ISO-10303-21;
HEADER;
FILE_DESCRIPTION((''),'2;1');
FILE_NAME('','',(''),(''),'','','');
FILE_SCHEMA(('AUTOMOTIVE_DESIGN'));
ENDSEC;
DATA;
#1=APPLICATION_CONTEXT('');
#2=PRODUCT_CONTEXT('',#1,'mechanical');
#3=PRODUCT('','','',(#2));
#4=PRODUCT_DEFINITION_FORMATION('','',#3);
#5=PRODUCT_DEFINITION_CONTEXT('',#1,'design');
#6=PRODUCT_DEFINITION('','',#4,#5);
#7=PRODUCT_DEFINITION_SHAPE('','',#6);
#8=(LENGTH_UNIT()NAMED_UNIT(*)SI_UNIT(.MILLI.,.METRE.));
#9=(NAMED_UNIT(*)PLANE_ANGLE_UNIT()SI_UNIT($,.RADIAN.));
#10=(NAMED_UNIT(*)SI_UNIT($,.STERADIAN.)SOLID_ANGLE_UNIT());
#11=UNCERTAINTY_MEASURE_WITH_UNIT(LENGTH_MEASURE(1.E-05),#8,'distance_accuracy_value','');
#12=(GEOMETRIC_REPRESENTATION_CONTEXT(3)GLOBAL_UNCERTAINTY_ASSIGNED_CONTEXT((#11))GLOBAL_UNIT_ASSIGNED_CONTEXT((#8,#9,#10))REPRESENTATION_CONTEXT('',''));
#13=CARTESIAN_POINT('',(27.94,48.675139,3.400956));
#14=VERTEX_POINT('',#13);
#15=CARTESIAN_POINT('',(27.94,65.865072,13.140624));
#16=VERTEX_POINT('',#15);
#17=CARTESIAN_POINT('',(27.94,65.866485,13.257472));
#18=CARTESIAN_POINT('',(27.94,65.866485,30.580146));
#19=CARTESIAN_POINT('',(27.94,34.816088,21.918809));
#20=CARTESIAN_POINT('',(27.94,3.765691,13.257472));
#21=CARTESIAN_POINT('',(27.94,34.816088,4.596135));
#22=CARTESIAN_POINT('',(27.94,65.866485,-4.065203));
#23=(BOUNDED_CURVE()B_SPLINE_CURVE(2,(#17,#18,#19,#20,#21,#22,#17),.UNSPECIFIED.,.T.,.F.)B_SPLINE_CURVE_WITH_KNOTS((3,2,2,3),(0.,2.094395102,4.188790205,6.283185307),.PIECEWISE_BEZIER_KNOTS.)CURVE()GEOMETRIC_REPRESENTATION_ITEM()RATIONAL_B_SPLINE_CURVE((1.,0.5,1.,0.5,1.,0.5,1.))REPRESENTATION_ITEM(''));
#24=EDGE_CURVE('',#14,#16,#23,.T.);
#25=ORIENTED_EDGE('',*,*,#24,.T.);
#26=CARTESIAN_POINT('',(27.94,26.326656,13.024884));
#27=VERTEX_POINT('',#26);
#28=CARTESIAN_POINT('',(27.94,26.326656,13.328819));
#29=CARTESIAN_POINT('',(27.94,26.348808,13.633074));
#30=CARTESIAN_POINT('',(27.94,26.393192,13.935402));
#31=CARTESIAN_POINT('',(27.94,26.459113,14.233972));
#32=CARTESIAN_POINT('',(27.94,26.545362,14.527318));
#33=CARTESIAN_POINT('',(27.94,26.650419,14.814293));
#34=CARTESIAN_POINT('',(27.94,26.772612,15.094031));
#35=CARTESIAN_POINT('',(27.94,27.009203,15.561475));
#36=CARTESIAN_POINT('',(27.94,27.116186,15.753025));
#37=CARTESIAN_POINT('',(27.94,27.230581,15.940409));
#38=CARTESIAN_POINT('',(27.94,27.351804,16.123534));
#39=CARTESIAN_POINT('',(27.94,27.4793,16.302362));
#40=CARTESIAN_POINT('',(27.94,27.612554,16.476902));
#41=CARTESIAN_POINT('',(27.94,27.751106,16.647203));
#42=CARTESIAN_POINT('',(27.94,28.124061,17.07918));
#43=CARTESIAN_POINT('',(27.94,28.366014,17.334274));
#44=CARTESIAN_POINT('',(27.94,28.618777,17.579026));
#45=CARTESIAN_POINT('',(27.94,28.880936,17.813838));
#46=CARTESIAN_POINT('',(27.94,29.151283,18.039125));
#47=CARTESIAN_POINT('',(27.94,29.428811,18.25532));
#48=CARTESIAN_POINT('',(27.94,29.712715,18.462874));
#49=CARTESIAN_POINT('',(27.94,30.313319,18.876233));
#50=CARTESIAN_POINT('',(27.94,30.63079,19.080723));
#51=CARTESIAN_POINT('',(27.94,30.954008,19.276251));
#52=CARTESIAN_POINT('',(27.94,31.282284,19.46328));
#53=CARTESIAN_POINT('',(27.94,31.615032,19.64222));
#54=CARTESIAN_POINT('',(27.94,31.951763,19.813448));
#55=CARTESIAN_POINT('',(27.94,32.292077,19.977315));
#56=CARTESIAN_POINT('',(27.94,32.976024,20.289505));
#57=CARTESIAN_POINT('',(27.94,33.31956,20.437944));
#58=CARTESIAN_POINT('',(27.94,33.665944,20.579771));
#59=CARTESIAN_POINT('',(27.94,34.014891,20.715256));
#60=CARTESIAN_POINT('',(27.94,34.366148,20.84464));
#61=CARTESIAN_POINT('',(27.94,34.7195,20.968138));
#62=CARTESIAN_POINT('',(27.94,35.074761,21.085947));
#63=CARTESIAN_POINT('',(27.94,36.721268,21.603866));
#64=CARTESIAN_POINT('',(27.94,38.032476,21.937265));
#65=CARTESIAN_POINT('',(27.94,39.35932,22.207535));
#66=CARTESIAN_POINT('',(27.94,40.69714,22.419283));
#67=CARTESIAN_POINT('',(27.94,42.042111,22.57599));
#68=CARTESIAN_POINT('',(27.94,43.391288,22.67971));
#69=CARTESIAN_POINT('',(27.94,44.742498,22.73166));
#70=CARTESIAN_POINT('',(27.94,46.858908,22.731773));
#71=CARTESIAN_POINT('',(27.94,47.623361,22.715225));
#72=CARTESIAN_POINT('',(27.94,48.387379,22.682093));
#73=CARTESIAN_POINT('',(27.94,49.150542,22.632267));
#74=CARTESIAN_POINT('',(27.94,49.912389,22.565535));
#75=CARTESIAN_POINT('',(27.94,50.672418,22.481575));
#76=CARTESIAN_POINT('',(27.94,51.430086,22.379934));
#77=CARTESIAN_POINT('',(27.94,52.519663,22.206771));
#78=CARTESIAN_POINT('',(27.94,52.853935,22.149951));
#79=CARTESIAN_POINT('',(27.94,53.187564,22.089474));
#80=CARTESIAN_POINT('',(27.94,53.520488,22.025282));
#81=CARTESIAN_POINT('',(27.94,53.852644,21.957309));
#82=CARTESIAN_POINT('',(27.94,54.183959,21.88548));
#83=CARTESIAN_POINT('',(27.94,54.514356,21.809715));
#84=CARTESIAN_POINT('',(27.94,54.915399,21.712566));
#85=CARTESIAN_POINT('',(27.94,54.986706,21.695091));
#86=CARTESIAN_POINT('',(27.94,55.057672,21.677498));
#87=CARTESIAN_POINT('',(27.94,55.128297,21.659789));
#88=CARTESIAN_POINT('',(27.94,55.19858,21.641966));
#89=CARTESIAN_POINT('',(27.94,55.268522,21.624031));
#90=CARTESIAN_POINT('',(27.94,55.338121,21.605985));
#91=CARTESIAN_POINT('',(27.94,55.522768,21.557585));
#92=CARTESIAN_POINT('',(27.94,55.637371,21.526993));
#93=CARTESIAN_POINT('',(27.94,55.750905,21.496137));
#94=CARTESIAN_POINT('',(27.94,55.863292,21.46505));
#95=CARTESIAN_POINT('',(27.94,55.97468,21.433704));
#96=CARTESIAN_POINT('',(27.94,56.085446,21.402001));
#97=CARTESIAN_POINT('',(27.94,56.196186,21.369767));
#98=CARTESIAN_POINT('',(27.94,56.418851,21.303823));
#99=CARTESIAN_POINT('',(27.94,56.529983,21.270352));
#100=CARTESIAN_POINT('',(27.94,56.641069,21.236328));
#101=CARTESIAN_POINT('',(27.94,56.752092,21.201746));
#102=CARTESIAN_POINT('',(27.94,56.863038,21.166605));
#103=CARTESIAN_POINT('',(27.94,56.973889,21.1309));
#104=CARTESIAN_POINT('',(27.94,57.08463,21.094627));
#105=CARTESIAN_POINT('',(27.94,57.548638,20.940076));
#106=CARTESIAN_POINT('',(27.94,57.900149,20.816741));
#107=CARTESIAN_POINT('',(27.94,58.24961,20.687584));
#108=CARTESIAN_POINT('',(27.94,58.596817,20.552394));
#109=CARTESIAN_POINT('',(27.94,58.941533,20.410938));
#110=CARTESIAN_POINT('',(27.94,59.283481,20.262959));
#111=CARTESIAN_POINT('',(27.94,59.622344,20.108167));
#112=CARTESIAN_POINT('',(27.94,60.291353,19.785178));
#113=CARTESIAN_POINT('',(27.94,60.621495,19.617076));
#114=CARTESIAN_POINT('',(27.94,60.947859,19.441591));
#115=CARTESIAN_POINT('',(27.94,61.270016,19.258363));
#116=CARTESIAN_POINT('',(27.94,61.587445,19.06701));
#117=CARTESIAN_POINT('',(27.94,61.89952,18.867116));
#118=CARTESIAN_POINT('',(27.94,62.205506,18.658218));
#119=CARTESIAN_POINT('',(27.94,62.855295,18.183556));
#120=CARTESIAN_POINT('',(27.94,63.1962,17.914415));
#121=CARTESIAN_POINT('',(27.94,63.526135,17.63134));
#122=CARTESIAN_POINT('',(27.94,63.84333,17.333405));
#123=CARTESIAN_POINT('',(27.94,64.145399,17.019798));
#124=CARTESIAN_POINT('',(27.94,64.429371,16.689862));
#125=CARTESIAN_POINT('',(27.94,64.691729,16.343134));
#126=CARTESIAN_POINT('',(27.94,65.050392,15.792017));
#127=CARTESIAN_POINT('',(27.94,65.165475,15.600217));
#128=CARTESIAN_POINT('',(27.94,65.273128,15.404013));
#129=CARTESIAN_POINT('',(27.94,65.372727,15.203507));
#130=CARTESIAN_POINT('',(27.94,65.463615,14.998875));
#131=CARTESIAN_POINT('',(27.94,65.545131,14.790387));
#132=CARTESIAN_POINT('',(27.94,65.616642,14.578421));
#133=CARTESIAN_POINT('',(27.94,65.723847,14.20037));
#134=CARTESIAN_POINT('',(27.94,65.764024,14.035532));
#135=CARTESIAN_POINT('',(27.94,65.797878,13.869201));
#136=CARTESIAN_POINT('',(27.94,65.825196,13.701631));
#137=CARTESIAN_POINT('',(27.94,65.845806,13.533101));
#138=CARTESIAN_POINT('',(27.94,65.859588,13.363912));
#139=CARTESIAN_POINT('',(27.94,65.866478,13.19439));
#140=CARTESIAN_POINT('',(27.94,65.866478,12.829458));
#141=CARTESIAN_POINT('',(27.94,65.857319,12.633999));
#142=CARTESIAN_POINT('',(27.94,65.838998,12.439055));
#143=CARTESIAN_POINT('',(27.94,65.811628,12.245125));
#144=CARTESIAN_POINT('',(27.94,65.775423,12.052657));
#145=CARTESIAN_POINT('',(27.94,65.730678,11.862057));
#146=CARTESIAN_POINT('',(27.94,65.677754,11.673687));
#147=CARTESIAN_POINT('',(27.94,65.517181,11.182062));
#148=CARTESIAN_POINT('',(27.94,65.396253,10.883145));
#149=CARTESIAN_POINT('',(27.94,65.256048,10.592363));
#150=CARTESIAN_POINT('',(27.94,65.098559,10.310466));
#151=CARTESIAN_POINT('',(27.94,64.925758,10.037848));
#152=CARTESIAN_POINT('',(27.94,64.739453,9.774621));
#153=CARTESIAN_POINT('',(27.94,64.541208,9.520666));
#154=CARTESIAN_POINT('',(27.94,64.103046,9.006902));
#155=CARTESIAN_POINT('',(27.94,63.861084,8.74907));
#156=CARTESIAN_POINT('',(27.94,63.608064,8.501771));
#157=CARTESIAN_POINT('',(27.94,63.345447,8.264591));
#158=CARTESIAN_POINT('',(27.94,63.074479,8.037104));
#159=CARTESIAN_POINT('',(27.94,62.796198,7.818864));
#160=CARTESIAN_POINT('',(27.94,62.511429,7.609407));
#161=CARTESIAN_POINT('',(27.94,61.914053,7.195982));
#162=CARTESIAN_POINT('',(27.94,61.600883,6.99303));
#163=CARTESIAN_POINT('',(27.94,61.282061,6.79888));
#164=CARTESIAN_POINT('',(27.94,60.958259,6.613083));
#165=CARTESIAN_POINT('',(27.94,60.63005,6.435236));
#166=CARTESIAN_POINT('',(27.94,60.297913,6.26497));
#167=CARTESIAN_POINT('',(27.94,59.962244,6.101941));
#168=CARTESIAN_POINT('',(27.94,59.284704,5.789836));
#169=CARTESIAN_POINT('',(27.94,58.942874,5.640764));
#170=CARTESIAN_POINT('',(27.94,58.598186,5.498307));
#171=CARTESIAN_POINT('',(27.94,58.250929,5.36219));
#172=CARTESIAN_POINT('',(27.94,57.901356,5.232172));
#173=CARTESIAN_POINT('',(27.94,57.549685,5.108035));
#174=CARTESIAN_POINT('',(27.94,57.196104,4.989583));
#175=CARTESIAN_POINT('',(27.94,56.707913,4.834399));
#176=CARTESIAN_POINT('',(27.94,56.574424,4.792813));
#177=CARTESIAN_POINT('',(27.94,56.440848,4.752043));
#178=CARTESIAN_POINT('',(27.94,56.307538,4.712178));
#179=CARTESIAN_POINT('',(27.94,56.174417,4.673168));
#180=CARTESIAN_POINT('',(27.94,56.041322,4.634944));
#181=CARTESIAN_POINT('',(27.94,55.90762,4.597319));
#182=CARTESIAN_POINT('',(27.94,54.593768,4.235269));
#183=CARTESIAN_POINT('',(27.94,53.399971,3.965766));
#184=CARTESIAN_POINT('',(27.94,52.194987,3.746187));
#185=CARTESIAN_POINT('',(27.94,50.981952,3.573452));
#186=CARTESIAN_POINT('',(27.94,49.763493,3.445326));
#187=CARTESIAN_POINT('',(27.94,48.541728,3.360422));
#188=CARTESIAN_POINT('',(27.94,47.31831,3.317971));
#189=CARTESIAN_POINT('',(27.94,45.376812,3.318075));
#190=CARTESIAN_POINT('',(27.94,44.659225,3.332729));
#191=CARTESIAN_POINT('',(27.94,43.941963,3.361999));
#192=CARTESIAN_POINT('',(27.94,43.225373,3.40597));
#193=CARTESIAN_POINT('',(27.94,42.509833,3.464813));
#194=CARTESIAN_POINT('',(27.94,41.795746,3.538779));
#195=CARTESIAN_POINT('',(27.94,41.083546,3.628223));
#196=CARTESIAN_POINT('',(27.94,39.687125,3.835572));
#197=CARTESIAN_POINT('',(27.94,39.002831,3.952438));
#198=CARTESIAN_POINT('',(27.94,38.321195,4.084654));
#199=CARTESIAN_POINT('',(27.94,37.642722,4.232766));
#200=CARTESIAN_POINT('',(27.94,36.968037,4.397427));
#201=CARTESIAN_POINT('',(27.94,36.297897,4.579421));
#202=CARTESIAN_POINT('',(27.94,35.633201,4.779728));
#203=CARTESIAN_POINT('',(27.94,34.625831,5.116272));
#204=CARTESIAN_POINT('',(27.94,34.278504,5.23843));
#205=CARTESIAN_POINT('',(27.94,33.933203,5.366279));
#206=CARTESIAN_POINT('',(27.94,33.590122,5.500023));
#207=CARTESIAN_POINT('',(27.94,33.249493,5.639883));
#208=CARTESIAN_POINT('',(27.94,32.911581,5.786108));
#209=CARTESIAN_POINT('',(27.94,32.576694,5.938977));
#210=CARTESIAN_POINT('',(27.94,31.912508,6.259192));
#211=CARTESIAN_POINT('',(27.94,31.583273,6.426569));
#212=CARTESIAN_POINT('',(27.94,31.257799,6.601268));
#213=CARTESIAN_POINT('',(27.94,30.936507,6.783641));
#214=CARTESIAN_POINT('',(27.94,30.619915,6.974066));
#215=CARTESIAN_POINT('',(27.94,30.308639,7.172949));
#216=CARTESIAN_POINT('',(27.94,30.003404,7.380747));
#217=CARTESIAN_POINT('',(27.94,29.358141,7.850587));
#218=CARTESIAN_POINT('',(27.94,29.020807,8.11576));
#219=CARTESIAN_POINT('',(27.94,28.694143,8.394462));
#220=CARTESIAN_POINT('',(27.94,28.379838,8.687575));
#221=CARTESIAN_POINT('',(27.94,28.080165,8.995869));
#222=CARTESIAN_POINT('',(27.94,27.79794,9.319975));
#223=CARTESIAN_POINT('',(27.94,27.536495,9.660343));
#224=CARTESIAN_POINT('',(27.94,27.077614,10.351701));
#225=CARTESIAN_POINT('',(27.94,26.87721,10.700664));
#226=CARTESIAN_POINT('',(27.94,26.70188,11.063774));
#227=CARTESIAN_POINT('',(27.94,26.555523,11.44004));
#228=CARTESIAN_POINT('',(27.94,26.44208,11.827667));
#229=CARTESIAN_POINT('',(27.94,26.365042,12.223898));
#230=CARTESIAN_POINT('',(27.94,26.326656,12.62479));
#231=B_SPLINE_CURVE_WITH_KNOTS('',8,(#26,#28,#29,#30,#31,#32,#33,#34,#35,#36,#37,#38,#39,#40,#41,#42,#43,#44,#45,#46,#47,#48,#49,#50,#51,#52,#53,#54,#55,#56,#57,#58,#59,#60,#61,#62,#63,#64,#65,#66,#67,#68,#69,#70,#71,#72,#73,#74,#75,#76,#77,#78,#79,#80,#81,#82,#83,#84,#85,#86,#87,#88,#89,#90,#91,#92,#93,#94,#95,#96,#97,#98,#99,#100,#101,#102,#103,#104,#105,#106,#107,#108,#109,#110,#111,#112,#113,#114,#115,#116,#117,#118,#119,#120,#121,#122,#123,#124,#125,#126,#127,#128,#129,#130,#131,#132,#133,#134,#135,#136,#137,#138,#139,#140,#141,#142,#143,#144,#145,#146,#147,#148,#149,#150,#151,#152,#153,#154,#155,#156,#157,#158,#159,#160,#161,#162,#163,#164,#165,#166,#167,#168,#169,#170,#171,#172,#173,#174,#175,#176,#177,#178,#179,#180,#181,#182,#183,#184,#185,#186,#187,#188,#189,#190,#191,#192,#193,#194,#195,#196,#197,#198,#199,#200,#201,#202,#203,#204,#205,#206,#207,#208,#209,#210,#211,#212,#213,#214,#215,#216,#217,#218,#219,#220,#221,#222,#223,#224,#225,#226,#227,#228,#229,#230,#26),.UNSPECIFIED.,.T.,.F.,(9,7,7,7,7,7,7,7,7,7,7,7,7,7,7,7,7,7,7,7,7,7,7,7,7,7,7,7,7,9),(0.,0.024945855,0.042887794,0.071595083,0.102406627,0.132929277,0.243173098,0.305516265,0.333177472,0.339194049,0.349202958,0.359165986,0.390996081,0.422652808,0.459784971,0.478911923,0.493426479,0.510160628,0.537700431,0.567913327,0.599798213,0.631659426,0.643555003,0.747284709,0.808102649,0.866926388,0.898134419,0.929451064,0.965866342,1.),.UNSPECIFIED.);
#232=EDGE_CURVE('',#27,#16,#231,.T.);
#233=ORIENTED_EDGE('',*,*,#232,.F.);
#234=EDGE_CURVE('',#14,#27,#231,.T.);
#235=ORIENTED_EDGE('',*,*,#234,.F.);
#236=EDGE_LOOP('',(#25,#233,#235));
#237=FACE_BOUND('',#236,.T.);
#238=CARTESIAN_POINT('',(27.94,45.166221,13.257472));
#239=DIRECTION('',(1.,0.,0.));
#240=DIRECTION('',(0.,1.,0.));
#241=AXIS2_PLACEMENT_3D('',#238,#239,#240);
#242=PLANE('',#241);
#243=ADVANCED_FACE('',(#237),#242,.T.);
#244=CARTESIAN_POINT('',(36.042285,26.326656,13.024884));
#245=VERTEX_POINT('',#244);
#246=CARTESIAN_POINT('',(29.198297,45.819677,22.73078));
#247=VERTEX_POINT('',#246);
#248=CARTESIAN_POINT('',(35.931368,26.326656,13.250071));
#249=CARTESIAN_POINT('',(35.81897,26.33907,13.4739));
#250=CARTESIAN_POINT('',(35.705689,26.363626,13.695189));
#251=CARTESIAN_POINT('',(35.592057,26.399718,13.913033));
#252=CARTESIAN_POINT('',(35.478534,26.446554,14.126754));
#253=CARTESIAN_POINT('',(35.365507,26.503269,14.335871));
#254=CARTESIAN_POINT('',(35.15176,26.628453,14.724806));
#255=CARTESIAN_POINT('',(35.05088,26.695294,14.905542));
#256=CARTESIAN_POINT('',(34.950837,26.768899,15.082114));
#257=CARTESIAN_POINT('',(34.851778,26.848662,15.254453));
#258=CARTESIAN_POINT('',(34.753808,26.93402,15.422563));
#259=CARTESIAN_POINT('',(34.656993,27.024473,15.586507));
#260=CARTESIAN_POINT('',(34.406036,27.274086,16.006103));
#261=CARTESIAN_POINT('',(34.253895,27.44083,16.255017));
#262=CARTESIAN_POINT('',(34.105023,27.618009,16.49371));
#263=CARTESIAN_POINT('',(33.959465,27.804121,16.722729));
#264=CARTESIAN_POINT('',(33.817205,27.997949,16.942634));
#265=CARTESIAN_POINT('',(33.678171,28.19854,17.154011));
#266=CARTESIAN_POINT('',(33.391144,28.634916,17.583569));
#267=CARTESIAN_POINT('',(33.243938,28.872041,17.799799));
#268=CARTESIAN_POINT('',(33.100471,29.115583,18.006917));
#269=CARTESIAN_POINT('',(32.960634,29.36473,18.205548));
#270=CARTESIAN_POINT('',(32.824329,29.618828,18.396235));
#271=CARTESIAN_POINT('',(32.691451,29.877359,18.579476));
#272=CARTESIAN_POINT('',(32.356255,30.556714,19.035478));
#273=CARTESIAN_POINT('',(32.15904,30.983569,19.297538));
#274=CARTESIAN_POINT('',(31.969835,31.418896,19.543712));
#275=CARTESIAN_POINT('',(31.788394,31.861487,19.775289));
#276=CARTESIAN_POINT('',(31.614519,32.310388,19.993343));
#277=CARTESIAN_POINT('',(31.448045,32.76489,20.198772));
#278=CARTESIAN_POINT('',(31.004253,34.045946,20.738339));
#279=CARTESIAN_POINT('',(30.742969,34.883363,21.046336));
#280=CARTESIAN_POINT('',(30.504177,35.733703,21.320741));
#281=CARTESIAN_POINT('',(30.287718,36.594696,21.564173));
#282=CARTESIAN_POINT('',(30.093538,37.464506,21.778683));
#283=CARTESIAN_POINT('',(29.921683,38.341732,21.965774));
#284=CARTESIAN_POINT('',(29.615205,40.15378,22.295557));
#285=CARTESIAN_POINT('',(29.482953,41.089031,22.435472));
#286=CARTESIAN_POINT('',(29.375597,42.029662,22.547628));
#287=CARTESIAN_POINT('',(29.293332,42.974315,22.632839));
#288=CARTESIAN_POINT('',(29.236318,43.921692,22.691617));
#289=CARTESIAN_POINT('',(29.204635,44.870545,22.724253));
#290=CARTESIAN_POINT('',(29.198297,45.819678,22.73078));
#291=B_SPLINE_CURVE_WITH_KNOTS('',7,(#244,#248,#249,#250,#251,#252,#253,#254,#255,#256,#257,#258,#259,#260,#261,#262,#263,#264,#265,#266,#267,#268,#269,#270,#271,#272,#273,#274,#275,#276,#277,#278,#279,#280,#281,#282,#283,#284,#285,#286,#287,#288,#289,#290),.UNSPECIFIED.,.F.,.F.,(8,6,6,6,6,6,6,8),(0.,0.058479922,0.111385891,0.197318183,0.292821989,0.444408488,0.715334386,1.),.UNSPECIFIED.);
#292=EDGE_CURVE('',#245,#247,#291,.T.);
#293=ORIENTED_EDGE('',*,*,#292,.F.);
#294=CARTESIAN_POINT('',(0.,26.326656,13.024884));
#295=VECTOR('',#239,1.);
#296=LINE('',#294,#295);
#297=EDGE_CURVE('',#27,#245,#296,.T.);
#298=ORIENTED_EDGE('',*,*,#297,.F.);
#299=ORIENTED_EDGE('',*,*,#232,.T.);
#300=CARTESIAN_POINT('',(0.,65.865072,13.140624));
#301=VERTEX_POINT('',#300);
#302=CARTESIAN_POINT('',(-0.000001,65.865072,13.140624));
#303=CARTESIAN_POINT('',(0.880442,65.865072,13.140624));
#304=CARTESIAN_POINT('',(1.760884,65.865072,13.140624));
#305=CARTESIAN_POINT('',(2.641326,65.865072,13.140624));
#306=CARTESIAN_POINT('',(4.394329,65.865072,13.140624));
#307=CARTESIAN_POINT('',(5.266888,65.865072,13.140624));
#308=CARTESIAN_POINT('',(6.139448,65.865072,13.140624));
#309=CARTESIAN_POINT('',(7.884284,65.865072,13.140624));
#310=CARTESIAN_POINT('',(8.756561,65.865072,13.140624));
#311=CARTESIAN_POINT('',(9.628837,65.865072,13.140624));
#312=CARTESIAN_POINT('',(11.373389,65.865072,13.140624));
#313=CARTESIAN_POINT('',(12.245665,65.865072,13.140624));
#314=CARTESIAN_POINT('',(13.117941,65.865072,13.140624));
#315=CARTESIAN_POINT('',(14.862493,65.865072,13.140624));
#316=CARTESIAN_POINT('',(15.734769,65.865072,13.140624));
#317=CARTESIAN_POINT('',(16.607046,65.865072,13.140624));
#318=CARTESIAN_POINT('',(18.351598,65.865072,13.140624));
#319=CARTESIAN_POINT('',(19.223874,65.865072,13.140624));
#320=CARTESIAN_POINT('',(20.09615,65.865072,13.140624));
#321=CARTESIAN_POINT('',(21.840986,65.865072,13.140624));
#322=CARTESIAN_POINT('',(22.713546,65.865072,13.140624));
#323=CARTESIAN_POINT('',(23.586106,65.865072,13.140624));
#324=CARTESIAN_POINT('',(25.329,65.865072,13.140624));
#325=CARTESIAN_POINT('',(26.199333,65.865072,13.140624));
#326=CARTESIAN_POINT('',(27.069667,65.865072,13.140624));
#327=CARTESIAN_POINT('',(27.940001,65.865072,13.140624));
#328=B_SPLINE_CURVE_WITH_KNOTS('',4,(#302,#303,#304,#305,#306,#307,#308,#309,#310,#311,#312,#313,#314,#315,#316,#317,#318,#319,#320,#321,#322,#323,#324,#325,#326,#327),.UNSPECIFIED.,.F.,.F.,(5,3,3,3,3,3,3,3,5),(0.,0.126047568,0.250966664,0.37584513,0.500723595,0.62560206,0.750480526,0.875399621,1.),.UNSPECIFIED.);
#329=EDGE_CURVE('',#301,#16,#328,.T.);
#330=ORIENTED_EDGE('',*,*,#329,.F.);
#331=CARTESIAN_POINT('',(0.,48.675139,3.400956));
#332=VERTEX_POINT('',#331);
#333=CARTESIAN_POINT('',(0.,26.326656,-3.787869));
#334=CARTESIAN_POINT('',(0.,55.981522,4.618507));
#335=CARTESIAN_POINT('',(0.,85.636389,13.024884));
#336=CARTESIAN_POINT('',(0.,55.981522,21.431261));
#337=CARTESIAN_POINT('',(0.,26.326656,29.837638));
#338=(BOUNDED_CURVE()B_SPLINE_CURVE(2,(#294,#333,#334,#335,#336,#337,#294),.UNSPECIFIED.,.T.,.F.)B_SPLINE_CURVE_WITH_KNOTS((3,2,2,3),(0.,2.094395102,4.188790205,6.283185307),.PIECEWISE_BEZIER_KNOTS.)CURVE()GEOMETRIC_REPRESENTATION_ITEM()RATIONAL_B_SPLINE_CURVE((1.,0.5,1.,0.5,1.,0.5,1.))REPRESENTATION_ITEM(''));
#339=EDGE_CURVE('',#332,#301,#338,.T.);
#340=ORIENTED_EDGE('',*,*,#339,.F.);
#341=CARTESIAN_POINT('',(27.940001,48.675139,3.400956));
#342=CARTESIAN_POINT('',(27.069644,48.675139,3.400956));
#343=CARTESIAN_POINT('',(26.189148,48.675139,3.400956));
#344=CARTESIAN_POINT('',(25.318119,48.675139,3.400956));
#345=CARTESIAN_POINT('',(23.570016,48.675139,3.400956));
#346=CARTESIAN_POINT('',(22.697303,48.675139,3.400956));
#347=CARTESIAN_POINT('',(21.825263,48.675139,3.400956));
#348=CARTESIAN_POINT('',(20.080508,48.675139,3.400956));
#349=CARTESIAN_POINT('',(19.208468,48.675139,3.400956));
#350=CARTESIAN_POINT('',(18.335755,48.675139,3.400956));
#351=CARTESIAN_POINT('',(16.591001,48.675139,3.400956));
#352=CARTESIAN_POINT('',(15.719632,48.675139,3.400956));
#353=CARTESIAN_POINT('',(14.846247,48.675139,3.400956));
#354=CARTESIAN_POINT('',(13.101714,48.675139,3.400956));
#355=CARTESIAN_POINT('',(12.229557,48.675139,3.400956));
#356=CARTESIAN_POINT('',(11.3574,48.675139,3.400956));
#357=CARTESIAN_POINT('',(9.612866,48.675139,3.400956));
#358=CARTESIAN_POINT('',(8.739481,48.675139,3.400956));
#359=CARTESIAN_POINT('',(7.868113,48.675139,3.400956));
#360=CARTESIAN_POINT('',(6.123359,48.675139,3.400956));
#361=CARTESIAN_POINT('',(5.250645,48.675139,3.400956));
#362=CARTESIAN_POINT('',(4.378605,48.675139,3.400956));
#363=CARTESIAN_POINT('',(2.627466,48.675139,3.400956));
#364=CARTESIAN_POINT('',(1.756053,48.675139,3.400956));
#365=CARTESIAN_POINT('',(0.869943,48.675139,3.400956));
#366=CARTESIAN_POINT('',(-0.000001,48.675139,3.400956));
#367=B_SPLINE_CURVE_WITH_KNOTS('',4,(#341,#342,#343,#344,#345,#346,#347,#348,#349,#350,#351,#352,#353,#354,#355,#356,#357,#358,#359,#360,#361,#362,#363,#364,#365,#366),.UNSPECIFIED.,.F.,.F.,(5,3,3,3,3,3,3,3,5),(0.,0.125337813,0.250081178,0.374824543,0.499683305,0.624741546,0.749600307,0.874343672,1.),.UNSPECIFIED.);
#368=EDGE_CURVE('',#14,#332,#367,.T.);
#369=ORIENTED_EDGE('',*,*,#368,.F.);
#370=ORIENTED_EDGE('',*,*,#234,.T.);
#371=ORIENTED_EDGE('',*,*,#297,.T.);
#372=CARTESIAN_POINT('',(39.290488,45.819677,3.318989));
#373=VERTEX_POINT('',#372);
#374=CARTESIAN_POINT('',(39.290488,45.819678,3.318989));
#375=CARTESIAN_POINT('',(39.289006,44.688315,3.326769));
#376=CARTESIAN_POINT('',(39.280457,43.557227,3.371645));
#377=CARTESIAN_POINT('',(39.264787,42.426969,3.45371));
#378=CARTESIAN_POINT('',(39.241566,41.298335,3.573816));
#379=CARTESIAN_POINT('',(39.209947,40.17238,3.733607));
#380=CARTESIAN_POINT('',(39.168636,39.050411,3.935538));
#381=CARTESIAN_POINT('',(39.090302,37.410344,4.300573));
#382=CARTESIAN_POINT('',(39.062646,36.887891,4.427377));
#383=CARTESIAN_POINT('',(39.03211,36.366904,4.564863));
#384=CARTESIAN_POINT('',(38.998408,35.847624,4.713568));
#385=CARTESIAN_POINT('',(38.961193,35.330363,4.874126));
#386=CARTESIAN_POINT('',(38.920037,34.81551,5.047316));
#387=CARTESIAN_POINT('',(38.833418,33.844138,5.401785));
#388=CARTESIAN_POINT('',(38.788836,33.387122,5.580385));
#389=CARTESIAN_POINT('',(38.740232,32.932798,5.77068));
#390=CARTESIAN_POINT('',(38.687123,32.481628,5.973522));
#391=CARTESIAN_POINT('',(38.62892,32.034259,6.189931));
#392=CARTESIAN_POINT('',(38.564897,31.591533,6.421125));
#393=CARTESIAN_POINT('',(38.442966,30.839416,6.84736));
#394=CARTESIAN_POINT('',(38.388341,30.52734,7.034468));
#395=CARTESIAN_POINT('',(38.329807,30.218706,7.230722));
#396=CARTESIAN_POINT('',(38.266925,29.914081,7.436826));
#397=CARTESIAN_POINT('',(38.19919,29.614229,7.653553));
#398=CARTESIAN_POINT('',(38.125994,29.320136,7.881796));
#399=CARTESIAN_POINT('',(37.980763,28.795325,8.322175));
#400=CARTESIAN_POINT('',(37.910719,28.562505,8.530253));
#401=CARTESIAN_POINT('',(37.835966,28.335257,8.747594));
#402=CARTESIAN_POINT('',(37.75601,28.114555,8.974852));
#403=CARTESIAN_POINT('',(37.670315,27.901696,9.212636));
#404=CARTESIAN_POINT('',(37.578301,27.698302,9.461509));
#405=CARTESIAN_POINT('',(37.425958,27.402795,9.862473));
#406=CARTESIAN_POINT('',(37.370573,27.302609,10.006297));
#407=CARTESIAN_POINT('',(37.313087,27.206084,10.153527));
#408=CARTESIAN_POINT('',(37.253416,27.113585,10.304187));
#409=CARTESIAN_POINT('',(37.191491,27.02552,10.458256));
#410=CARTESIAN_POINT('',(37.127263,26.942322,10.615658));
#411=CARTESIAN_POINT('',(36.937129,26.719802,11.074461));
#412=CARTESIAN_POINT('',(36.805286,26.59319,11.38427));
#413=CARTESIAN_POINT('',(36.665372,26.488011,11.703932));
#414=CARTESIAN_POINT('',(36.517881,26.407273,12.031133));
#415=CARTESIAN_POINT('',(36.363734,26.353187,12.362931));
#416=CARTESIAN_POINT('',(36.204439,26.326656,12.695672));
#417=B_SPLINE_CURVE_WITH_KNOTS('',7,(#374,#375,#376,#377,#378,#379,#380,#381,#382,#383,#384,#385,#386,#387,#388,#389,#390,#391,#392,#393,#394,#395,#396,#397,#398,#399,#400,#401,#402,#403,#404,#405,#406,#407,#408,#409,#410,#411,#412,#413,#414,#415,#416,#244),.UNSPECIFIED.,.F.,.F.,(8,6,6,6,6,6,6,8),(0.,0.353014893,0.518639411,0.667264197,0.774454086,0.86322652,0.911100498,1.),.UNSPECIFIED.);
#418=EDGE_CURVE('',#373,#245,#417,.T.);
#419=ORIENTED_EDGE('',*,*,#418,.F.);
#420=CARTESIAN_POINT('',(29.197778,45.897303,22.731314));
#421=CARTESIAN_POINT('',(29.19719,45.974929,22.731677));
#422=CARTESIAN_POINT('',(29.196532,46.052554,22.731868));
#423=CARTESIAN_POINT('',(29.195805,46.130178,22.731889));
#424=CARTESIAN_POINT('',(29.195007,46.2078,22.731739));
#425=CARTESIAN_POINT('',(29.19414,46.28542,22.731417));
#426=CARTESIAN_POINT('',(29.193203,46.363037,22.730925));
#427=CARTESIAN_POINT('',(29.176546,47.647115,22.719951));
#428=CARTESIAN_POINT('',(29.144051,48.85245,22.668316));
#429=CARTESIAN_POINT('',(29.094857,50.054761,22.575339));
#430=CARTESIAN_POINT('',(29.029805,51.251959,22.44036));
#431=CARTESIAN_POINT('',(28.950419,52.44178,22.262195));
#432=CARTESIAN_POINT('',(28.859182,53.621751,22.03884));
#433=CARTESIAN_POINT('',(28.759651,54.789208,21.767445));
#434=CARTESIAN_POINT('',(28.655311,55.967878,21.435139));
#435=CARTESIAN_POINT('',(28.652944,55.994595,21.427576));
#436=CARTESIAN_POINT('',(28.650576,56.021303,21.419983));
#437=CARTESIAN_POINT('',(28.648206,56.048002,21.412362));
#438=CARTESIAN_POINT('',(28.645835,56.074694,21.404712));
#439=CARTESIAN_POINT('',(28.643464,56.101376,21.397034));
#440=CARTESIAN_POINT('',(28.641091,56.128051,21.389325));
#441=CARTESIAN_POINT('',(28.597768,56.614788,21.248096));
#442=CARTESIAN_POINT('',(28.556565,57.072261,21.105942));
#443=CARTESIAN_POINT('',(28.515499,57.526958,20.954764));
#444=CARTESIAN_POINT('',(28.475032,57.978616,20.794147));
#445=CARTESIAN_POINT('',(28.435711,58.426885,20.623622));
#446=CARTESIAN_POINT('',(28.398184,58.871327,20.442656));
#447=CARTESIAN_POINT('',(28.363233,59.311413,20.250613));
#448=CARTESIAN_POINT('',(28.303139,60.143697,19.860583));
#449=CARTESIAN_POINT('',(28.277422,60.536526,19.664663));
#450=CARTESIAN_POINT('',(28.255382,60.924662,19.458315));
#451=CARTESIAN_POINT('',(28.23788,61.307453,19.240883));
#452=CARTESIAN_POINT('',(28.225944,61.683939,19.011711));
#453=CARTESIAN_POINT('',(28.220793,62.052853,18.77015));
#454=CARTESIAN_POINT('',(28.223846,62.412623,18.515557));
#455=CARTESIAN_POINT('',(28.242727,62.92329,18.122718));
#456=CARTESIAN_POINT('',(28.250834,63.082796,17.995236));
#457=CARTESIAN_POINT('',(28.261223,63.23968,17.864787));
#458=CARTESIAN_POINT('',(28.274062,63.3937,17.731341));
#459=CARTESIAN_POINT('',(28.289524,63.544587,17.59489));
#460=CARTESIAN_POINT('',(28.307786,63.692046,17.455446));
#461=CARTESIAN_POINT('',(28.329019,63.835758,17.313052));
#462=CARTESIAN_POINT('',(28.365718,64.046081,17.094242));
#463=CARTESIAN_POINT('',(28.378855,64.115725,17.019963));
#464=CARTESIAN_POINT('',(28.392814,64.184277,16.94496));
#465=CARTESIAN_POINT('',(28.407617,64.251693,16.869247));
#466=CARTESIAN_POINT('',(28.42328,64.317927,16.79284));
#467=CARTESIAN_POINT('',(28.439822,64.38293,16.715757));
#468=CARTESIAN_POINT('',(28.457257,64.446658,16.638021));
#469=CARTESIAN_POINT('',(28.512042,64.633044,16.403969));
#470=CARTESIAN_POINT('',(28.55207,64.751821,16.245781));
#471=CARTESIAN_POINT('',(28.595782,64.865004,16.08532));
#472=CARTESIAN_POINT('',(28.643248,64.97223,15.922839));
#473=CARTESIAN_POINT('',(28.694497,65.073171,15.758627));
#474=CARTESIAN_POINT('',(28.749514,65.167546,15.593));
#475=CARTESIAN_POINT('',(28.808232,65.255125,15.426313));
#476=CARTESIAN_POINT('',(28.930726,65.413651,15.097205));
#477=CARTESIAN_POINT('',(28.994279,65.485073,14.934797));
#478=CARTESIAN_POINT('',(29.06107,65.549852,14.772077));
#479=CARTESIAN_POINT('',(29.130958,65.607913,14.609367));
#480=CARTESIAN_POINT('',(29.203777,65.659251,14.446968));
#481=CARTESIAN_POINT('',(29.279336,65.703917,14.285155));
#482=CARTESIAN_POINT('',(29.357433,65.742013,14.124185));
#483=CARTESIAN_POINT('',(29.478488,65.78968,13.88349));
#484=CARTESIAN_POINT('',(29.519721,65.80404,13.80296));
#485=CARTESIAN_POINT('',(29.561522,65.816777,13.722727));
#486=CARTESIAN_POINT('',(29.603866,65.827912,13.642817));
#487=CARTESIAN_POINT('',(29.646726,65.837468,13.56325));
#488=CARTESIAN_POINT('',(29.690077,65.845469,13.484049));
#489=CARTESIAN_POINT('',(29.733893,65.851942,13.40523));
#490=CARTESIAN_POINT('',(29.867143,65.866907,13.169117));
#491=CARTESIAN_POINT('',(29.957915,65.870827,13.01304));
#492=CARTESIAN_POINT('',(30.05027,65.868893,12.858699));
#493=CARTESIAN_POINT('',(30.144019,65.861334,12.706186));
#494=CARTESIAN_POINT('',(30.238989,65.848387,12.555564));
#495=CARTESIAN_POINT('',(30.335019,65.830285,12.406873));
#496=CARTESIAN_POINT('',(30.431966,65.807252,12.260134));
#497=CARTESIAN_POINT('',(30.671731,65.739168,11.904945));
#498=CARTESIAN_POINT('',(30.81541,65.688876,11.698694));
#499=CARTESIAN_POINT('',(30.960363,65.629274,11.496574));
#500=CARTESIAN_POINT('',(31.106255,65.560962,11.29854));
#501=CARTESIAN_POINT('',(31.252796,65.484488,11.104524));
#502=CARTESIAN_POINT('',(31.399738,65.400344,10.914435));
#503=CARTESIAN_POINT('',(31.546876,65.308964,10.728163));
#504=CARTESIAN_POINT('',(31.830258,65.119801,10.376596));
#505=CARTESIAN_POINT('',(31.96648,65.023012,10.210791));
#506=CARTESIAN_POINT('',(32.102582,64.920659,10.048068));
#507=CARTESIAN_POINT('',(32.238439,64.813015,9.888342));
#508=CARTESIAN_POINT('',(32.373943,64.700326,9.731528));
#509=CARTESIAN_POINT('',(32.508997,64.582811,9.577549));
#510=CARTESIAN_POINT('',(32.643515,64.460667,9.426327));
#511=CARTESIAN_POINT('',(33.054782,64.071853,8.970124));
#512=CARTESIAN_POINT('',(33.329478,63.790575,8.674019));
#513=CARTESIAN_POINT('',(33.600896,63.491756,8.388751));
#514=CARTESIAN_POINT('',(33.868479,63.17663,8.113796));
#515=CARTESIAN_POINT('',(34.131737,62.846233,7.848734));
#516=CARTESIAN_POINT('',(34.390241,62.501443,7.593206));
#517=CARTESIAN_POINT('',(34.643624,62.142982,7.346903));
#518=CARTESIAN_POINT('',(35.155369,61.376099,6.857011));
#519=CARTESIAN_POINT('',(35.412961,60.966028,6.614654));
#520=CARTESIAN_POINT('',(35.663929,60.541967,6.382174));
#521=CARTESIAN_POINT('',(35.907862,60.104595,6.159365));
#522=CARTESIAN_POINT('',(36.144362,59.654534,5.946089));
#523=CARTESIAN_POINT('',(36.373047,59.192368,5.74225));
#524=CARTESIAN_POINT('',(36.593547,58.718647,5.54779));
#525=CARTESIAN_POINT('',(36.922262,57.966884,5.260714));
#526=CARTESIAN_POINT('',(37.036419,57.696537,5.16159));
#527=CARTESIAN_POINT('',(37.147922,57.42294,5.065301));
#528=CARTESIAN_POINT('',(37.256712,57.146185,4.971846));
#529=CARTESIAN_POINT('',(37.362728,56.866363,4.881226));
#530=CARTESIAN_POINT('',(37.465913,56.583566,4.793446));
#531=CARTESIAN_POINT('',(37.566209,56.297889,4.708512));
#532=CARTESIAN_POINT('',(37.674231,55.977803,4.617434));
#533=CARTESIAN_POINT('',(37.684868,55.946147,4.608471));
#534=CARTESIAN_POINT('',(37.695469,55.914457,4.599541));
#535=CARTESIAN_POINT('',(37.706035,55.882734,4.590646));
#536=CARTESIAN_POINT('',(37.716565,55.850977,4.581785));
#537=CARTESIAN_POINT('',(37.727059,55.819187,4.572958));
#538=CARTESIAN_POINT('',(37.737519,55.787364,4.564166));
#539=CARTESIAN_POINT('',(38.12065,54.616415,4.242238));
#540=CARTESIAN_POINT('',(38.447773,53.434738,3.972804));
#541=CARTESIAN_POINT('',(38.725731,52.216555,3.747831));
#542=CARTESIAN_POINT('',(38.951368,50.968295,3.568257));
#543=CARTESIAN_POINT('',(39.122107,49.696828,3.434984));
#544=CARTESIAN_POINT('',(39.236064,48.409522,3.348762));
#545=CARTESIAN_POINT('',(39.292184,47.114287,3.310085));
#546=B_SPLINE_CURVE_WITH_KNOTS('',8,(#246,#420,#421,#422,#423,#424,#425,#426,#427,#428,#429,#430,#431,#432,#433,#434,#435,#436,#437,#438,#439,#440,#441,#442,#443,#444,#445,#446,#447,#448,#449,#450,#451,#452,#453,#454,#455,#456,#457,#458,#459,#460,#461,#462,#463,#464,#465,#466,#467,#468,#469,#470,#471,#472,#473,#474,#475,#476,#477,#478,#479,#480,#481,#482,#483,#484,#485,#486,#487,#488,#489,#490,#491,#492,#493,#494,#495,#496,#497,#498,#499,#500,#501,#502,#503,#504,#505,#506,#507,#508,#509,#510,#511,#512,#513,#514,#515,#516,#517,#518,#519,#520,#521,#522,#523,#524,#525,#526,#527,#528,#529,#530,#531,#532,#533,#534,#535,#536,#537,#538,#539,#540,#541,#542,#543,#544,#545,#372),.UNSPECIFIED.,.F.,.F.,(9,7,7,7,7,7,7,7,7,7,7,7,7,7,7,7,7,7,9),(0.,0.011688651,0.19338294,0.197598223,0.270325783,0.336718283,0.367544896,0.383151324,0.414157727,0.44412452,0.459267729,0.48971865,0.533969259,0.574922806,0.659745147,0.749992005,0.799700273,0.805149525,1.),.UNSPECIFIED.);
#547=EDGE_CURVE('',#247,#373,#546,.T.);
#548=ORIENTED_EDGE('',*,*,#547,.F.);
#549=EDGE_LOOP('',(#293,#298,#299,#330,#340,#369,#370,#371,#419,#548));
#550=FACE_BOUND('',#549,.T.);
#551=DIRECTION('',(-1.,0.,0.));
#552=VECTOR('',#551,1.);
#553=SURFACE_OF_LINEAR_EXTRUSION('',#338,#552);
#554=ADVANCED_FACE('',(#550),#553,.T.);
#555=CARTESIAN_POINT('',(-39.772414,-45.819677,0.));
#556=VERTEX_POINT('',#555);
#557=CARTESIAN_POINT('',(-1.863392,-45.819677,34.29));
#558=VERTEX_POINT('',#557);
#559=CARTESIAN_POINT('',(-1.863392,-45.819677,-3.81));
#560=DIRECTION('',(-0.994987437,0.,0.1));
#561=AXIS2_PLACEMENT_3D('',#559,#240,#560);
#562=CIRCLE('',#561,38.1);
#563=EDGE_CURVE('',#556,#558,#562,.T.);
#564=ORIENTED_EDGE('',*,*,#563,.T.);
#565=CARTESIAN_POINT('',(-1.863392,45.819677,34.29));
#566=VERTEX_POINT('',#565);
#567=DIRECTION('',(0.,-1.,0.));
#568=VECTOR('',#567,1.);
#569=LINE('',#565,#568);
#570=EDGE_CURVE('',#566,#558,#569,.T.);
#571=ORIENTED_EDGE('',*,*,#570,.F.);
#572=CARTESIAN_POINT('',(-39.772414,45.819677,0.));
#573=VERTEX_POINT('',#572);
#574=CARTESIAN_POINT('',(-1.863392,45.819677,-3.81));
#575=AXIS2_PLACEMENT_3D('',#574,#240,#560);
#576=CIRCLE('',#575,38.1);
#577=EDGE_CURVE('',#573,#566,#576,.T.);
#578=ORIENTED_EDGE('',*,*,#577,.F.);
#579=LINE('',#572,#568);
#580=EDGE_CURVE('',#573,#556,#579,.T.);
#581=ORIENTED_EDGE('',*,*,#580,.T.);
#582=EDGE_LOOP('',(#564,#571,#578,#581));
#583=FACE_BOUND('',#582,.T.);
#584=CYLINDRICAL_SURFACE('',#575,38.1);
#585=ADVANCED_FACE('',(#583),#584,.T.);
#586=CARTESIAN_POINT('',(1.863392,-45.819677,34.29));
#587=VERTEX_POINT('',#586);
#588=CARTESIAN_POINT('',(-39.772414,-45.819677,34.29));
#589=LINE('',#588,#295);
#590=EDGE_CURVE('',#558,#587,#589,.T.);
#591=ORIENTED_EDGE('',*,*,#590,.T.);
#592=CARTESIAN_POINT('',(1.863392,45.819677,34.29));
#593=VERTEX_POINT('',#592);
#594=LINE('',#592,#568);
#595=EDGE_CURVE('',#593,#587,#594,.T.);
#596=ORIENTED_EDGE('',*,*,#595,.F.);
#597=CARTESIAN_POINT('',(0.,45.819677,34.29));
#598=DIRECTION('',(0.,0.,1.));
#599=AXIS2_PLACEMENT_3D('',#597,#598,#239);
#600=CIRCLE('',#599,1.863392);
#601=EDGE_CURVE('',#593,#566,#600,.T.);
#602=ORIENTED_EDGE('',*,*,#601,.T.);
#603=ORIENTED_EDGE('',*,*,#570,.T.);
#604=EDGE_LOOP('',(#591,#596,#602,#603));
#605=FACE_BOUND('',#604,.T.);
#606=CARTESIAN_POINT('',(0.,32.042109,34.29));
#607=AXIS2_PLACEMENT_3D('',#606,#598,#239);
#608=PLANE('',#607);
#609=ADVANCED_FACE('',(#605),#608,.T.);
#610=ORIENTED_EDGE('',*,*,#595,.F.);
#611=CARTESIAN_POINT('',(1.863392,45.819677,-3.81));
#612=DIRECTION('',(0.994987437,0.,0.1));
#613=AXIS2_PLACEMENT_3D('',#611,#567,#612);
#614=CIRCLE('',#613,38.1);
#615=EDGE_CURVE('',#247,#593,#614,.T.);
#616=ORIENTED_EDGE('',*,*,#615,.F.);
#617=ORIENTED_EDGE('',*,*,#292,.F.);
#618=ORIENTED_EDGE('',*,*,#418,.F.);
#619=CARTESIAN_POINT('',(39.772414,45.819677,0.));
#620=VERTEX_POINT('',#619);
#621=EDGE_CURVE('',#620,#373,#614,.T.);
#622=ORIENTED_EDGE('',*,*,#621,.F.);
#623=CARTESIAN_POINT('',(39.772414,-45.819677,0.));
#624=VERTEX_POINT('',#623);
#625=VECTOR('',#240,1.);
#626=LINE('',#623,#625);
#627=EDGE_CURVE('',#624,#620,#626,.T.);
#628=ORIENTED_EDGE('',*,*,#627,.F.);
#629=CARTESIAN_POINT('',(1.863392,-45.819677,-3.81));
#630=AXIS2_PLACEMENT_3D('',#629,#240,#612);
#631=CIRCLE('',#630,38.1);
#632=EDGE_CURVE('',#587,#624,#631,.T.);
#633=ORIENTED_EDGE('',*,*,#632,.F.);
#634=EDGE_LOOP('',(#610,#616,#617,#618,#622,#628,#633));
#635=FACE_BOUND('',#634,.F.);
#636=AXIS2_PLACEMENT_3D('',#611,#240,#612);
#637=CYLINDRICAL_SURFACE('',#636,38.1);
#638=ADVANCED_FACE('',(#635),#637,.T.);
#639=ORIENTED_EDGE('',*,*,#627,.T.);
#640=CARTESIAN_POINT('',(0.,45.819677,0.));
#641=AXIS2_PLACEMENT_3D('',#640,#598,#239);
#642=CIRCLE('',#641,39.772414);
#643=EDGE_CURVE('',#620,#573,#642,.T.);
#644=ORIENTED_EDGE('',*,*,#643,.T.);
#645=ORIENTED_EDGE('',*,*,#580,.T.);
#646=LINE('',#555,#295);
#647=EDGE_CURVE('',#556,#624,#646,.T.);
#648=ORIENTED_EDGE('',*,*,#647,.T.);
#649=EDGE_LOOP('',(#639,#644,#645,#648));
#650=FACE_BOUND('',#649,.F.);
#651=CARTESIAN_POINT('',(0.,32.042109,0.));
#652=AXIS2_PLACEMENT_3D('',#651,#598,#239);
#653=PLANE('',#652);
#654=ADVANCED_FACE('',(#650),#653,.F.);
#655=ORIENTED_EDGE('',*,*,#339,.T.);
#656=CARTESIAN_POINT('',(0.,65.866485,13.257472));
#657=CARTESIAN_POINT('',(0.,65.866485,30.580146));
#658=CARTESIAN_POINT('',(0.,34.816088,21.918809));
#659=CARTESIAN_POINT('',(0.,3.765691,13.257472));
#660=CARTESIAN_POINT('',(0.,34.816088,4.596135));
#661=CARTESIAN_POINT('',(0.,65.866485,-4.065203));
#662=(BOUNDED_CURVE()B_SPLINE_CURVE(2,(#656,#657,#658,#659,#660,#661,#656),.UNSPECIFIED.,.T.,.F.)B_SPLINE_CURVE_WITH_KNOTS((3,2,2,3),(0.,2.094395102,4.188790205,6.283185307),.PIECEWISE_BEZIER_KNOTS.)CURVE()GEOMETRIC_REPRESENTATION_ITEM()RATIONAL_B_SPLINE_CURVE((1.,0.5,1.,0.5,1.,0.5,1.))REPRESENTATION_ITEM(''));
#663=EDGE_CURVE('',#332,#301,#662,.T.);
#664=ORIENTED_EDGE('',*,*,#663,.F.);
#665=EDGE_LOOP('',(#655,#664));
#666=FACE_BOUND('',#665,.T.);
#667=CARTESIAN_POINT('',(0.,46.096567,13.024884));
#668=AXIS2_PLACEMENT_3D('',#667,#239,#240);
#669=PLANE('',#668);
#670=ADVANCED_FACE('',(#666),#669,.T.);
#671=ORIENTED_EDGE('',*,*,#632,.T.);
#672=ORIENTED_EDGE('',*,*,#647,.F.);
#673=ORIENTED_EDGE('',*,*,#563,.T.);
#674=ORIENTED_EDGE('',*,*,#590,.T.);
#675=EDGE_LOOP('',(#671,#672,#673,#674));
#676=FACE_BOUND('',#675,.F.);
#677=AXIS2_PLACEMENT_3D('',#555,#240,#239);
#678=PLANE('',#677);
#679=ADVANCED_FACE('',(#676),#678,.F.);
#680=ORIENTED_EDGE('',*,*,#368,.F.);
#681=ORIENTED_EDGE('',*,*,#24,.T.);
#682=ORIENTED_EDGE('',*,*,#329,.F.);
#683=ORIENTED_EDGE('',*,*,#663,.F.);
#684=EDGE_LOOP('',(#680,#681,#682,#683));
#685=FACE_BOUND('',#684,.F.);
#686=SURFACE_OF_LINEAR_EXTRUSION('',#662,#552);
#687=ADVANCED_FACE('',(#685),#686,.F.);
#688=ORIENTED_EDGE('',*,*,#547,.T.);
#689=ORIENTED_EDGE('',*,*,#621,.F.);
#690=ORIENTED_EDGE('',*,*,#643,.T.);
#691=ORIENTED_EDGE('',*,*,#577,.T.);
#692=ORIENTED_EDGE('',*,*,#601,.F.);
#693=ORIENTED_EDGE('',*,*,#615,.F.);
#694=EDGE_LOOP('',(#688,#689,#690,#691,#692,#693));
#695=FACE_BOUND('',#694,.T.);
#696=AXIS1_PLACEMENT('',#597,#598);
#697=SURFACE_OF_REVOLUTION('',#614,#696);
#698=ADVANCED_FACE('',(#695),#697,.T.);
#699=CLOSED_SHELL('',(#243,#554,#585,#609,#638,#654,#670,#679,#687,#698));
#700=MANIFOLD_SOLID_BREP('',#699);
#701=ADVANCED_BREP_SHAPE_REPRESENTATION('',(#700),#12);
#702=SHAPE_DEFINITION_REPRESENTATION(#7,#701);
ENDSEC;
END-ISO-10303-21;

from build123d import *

# Parameters (mm, degrees)
F1_DEPTH    = 34.29
F2_T1_DEPTH = 186.4119082094
F2_T4_ANGLE = 180
F4_DEPTH    = 50.8
F6_DEPTH    = 27.94


# Not quite as in the source:
# - a fillet or chamfer that OpenCascade refuses, or shapes differently, is made with other operations: its cross-section is extruded or revolved along the edge and cut away or added


with BuildPart() as f1:
    # F0 (on Top) → F1 (new body)
    with BuildSketch(Plane.XY):
        with BuildLine():
            ThreePointArc((-39.772413671, 45.8196774125), (0, 6.0472637415), (39.772413671, 45.8196774125))
            Line((39.772413671, 45.8196774125), (-39.772413671, 45.8196774125))
        make_face()
        with BuildLine():
            Line((-39.772413671, 45.8196774125), (39.772413671, 45.8196774125))
            ThreePointArc((39.772413671, 45.8196774125), (0, 85.5920910835), (-39.772413671, 45.8196774125))
        make_face()
        with BuildLine():
            Line((39.772413671, -45.8196774125), (39.772413671, 45.8196774125))
            ThreePointArc((39.772413671, 45.8196774125), (0, 6.0472637415), (-39.772413671, 45.8196774125))
            Line((-39.772413671, 45.8196774125), (-39.772413671, -45.8196774125))
            Line((-39.772413671, -45.8196774125), (39.772413671, -45.8196774125))
        make_face()
    extrude(amount=F1_DEPTH)

    # F2: fillet of radius 38.1 on 3 edges, made by hand

    # F2_s2 → F2_t1 (cut)
    with BuildSketch(Plane.XZ.offset(-45.8196774125)):
        with BuildLine():
            ThreePointArc((-39.772413671, 0), (-27.4216493001, 24.4457162358), (-1.8633923173, 34.29))
            Line((-1.8633923173, 34.29), (-39.772413671, 34.29))
            Line((-39.772413671, 34.29), (-39.772413671, 0))
        make_face()
        with BuildLine():
            ThreePointArc((39.772413671, 0), (27.4216493001, 24.4457162358), (1.8633923173, 34.29))
            Line((1.8633923173, 34.29), (39.772413671, 34.29))
            Line((39.772413671, 34.29), (39.772413671, 0))
        make_face()
    extrude(amount=F2_T1_DEPTH, mode=Mode.SUBTRACT)

    # F2_s3 → F2_t4 (revolve, cut)
    with BuildSketch(Plane.XZ.offset(-45.8196774125)):
        with BuildLine():
            ThreePointArc((39.772413671, 0), (27.4216493001, 24.4457162358), (1.8633923173, 34.29))
            Line((1.8633923173, 34.29), (39.772413671, 34.29))
            Line((39.772413671, 34.29), (39.772413671, 0))
        make_face()
    revolve(axis=Axis((0, 45.8196774125, 34.29), (0, 0, 1)), revolution_arc=F2_T4_ANGLE, mode=Mode.SUBTRACT)

    # F3 (on Right) → F4 (cut)
    with BuildSketch(Plane.YZ):
        with BuildLine():
            add(Edge.make_bspline(
                [(26.3266563416, 13.0248842761), (26.3266563416, -3.7878693164), (55.981522426, 4.6185074799), (85.6363885105, 13.0248842761), (55.981522426, 21.4312610723), (26.3266563416, 29.8376378686), (26.3266563416, 13.0248842761)],
                knots=[0, 0, 0, 2.0943951024, 2.0943951024, 4.1887902048, 4.1887902048, 6.2831853072, 6.2831853072, 6.2831853072], degree=2, weights=[1, 0.5, 1, 0.5, 1, 0.5, 1]))
        make_face()
    extrude(amount=F4_DEPTH, mode=Mode.SUBTRACT)

    # F5 (on Right) → F6 (join)
    with BuildSketch(Plane.YZ):
        with BuildLine():
            add(Edge.make_bspline(
                [(65.8664852381, 13.2574718446), (65.8664852381, 30.580146327), (34.8160881549, 21.9188090858), (3.7656910717, 13.2574718446), (34.8160881549, 4.5961346033), (65.8664852381, -4.0652026379), (65.8664852381, 13.2574718446)],
                knots=[0, 0, 0, 2.0943951024, 2.0943951024, 4.1887902048, 4.1887902048, 6.2831853072, 6.2831853072, 6.2831853072], degree=2, weights=[1, 0.5, 1, 0.5, 1, 0.5, 1]))
        make_face()
    extrude(amount=F6_DEPTH)


solid = f1.part
